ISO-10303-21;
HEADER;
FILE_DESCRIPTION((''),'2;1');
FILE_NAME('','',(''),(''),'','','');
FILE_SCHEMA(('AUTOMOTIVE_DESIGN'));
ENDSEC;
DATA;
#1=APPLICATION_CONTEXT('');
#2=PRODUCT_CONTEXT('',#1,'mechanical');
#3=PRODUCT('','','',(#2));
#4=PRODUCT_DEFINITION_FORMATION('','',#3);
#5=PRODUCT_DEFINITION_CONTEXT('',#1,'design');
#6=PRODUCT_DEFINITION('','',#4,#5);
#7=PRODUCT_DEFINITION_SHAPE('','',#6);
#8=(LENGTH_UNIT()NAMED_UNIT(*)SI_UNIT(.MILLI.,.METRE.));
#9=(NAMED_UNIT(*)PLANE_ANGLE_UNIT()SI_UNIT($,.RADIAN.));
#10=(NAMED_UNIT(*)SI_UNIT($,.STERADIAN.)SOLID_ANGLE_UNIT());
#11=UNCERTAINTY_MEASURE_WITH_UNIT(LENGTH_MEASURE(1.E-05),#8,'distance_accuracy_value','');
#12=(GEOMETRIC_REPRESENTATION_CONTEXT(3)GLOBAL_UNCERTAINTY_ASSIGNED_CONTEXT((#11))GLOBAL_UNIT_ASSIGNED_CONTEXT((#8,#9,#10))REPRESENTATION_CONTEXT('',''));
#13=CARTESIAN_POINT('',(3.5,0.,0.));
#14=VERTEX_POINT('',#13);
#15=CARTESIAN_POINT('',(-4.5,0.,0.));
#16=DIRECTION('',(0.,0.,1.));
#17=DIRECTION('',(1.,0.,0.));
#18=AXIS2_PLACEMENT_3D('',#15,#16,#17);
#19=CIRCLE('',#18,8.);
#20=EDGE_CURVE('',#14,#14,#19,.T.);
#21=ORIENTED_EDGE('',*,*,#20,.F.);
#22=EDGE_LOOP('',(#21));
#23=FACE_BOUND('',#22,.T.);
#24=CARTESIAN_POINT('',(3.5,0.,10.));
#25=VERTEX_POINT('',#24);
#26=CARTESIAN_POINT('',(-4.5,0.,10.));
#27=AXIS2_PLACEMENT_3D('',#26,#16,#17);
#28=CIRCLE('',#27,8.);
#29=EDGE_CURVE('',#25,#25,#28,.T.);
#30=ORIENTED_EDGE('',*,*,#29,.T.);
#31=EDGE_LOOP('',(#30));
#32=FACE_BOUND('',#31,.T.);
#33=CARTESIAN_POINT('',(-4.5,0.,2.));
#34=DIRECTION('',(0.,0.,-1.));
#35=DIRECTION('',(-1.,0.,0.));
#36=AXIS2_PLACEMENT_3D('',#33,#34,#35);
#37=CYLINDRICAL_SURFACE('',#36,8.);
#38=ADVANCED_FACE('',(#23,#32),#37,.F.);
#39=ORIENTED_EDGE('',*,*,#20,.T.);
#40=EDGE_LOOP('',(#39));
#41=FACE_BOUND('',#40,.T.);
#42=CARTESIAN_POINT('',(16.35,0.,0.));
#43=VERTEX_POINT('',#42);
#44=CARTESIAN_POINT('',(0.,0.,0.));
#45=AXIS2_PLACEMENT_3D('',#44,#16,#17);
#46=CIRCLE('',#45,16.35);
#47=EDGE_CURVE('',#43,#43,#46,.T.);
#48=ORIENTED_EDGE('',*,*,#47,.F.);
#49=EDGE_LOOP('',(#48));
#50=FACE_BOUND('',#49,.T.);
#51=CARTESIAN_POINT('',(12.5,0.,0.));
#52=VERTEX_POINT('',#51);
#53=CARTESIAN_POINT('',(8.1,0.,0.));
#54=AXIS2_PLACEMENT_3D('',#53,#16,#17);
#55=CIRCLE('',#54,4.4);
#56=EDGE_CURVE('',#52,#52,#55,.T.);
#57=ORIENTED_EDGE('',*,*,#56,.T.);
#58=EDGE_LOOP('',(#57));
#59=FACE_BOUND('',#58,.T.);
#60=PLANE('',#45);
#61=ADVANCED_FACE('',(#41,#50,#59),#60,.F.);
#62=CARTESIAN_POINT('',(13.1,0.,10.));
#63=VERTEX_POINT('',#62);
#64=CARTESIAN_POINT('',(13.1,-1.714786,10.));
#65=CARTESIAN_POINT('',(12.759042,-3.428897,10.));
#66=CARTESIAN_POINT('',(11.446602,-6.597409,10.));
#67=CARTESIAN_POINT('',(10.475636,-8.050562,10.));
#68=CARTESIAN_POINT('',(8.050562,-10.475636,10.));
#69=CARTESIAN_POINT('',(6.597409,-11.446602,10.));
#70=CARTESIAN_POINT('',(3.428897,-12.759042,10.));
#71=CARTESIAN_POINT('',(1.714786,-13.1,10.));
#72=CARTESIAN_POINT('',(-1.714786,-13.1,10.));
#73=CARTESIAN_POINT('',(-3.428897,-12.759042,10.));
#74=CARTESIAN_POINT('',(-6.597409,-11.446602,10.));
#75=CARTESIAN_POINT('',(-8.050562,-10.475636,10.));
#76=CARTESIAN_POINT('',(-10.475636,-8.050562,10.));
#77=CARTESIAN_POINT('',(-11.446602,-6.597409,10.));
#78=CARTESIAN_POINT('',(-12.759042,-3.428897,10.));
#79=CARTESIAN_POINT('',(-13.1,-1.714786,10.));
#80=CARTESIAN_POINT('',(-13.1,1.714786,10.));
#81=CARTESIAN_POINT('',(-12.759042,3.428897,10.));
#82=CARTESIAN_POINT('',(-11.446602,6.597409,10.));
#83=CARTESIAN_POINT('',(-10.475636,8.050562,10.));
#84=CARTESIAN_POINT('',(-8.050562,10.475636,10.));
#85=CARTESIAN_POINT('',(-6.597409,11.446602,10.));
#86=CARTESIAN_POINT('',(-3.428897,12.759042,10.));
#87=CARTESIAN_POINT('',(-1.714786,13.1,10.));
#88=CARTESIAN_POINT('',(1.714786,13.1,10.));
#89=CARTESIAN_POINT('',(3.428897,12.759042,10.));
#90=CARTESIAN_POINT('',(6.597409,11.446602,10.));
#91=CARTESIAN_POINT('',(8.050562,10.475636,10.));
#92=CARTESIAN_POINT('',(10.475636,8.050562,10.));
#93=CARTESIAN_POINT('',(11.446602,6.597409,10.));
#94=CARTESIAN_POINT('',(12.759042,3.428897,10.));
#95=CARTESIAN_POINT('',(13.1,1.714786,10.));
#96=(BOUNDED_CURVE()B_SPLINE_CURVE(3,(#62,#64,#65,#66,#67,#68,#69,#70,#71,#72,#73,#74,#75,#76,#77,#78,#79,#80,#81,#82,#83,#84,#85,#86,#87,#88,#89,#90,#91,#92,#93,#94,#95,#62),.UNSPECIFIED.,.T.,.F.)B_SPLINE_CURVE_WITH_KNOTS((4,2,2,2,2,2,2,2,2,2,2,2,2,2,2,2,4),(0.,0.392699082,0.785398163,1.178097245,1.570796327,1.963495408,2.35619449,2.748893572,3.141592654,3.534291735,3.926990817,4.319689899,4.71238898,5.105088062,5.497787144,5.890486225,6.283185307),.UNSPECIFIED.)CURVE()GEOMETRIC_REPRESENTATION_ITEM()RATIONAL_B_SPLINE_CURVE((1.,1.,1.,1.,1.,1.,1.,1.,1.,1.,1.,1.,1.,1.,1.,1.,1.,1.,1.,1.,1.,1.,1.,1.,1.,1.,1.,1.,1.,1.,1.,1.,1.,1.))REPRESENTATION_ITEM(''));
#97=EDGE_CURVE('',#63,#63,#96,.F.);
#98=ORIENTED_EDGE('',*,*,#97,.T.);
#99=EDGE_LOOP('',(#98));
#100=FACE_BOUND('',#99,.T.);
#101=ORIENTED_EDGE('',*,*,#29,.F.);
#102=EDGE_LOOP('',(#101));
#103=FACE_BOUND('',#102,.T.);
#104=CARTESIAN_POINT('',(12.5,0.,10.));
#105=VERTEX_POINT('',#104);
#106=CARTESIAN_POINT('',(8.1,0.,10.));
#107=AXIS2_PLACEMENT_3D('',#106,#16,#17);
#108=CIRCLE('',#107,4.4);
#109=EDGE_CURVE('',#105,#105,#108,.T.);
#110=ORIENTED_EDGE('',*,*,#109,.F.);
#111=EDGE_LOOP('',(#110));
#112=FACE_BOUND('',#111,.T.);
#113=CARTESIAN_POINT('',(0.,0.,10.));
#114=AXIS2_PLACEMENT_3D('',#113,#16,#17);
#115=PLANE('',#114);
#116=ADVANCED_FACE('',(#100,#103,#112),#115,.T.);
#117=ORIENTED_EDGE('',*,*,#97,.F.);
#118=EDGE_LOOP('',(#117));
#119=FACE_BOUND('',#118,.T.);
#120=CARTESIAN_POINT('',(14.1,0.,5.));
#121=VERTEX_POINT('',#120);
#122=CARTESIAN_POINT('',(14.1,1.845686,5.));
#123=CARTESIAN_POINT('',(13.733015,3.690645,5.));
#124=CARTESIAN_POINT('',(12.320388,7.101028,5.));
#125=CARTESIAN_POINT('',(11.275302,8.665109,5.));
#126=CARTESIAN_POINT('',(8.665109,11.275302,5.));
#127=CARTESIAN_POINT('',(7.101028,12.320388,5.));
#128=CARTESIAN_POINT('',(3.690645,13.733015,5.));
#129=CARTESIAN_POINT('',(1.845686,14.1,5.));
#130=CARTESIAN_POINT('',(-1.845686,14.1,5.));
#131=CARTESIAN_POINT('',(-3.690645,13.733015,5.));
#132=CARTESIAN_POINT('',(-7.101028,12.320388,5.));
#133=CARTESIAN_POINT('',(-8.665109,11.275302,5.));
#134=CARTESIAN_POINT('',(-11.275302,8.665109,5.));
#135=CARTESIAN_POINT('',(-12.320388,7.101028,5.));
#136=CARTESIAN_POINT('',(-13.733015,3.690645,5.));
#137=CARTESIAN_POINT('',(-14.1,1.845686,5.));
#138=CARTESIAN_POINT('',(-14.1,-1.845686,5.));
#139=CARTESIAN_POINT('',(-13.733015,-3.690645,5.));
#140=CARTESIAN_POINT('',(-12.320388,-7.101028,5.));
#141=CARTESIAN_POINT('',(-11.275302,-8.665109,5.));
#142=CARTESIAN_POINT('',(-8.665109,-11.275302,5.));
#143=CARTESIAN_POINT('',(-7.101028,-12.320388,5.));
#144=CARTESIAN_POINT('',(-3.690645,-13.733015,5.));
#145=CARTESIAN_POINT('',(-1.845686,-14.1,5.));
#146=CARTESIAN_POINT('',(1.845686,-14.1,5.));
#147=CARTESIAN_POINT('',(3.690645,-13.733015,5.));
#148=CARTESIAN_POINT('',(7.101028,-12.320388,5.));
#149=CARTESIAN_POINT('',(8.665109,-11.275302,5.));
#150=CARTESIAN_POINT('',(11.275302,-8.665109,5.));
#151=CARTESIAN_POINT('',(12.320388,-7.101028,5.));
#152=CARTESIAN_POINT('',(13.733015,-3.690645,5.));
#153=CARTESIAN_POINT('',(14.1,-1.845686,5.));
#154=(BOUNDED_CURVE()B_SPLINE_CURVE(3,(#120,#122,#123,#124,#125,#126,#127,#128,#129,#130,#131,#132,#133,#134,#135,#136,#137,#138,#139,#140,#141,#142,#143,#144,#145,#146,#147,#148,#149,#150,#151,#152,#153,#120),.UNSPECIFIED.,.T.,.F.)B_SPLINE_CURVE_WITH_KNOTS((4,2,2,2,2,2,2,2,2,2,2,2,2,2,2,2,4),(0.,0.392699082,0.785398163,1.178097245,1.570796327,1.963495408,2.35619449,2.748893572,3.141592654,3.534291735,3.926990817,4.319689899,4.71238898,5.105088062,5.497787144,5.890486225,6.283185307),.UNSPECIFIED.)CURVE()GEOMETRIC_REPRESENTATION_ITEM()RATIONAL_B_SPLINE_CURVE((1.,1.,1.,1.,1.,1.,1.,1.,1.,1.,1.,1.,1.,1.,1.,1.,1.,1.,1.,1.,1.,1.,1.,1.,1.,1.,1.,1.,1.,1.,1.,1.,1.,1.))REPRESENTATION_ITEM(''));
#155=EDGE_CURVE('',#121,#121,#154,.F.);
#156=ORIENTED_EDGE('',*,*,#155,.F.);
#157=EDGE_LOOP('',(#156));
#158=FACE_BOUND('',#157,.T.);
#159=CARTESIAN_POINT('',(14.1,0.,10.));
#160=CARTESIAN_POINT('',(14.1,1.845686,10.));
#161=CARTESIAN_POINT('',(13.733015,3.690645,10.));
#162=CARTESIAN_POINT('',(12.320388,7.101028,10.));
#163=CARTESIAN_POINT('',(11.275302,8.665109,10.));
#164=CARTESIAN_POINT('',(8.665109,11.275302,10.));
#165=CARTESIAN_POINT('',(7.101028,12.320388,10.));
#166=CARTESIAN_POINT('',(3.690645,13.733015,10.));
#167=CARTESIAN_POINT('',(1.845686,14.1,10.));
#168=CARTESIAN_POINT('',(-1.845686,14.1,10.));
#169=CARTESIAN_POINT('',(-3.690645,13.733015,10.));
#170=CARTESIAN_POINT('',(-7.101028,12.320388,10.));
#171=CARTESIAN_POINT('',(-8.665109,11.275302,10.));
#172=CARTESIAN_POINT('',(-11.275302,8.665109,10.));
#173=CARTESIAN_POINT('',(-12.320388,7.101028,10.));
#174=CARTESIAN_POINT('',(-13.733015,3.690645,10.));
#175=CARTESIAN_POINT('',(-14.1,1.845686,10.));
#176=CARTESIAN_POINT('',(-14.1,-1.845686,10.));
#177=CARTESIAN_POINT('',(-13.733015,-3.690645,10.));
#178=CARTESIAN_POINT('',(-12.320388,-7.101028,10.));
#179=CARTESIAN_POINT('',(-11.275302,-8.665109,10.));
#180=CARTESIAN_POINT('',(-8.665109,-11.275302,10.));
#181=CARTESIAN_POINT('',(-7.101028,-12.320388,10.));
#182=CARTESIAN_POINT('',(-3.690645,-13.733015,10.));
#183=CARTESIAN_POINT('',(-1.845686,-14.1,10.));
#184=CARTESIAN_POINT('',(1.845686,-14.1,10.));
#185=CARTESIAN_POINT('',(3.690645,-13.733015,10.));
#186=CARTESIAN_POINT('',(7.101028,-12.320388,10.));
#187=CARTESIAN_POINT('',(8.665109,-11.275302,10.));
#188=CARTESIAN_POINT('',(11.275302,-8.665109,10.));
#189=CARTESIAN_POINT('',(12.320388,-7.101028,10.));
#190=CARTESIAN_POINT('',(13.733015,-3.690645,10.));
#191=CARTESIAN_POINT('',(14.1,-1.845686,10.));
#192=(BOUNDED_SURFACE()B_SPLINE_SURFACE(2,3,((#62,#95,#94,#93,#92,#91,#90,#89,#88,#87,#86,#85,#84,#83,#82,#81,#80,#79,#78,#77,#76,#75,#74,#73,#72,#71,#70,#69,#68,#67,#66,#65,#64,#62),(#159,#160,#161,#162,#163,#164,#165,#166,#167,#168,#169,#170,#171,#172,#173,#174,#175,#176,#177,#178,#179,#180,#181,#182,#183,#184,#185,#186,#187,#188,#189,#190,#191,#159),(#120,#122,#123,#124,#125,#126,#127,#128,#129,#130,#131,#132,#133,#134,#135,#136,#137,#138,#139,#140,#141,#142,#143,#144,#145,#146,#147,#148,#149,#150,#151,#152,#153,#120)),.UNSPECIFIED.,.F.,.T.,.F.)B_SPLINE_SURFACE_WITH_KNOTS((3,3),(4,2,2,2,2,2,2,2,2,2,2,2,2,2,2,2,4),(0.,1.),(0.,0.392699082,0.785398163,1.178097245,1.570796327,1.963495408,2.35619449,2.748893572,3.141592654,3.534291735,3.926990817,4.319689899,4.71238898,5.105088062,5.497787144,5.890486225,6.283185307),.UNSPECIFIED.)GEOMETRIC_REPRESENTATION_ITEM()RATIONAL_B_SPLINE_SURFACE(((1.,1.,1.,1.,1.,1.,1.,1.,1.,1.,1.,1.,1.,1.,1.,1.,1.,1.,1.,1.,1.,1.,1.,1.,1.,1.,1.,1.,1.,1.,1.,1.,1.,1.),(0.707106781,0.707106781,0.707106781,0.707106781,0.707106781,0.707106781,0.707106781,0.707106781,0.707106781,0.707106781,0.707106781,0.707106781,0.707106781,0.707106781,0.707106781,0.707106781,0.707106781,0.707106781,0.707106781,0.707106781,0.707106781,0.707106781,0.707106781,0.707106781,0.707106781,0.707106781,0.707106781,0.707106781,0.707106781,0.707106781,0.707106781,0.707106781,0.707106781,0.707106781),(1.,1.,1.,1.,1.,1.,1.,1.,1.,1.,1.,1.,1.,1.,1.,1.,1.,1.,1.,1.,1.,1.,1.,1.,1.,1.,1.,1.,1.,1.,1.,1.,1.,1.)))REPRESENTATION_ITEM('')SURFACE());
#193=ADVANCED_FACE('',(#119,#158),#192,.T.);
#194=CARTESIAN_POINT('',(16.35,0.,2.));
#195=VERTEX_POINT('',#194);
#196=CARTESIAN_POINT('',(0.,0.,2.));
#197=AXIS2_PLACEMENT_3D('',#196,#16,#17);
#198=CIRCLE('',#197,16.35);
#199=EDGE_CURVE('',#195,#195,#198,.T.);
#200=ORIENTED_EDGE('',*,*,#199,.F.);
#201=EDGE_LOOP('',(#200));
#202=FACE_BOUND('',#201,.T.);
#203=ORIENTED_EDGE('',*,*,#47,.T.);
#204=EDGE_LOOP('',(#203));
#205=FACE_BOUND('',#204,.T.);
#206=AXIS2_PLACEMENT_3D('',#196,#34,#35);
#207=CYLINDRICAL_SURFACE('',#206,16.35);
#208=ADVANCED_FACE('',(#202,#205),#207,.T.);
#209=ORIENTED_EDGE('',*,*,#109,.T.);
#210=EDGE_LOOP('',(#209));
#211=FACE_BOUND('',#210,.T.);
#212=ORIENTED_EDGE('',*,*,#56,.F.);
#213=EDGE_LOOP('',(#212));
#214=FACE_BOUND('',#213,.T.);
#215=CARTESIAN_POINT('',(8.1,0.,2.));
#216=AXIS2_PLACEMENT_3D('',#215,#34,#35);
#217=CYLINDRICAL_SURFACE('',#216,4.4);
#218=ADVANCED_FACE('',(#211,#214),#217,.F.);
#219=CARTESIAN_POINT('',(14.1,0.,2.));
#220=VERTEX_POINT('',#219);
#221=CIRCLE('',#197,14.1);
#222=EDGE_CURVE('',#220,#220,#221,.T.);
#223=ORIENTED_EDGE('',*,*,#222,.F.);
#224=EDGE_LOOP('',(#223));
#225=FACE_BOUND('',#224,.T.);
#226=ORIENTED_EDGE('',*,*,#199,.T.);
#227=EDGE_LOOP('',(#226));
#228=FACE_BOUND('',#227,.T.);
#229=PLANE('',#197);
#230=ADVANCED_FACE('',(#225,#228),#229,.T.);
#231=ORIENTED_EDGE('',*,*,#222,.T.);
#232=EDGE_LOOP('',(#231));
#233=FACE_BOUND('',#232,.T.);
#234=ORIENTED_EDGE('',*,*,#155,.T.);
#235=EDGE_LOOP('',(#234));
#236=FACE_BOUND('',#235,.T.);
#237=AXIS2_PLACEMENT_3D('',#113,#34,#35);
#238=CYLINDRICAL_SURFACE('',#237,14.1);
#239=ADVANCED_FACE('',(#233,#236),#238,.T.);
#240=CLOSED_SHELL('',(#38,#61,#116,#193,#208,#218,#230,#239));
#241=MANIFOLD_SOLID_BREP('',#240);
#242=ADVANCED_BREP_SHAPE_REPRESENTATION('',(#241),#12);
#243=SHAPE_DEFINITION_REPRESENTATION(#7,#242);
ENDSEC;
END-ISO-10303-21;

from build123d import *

# Parameters (mm, degrees)
SKETCH_1_R      = 16.35
SKETCH_1_R_2    = 4.4
SKETCH_1_R_3    = 8
EXTRUDE_1_DEPTH = 2
SKETCH_2_R      = 14.1
SKETCH_2_R_2    = 4.4
SKETCH_2_R_3    = 8
EXTRUDE_2_DEPTH = 8
FILLET_1_SIZE   = 5
FILLET_1_SIZE_2 = 1


with BuildPart() as part:
    # 草图1 → 凸台-拉伸1 (new body)
    with BuildSketch(Plane.XY):
        Circle(SKETCH_1_R)
        with Locations((8.1, 0)):
            Circle(SKETCH_1_R_2, mode=Mode.SUBTRACT)
        with Locations((-4.5, 0)):
            Circle(SKETCH_1_R_3, mode=Mode.SUBTRACT)
    extrude(amount=EXTRUDE_1_DEPTH)

    # 草图2 → 凸台-拉伸2 (add)
    with BuildSketch(Plane.XY.offset(2)):
        Circle(SKETCH_2_R)
        with Locations((8.1, 0)):
            Circle(SKETCH_2_R_2, mode=Mode.SUBTRACT)
        with Locations((-4.5, 0)):
            Circle(SKETCH_2_R_3, mode=Mode.SUBTRACT)
    extrude(amount=EXTRUDE_2_DEPTH)

    # 圆角1
    # an asymmetric fillet: 5, 1 mm, written as the material it takes off along each edge
    with BuildSketch(Plane(origin=(0, 0, 10), x_dir=(1, 0, 0), z_dir=(0, -1, 0))) as fillet_1_piece_1:
        with BuildLine():
            Bezier((14.1, -FILLET_1_SIZE), (14.1, 0), (14.1 - FILLET_1_SIZE_2, 0), weights=[1, 0.707106781, 1])
            Line((14.1 - FILLET_1_SIZE_2, 0), (14.1, 0))
            Line((14.1, 0), (14.1, -FILLET_1_SIZE))
        make_face()
    revolve(axis=Axis((0, 0, 10), (0, 0, 1)), mode=Mode.SUBTRACT)


solid = part.part
